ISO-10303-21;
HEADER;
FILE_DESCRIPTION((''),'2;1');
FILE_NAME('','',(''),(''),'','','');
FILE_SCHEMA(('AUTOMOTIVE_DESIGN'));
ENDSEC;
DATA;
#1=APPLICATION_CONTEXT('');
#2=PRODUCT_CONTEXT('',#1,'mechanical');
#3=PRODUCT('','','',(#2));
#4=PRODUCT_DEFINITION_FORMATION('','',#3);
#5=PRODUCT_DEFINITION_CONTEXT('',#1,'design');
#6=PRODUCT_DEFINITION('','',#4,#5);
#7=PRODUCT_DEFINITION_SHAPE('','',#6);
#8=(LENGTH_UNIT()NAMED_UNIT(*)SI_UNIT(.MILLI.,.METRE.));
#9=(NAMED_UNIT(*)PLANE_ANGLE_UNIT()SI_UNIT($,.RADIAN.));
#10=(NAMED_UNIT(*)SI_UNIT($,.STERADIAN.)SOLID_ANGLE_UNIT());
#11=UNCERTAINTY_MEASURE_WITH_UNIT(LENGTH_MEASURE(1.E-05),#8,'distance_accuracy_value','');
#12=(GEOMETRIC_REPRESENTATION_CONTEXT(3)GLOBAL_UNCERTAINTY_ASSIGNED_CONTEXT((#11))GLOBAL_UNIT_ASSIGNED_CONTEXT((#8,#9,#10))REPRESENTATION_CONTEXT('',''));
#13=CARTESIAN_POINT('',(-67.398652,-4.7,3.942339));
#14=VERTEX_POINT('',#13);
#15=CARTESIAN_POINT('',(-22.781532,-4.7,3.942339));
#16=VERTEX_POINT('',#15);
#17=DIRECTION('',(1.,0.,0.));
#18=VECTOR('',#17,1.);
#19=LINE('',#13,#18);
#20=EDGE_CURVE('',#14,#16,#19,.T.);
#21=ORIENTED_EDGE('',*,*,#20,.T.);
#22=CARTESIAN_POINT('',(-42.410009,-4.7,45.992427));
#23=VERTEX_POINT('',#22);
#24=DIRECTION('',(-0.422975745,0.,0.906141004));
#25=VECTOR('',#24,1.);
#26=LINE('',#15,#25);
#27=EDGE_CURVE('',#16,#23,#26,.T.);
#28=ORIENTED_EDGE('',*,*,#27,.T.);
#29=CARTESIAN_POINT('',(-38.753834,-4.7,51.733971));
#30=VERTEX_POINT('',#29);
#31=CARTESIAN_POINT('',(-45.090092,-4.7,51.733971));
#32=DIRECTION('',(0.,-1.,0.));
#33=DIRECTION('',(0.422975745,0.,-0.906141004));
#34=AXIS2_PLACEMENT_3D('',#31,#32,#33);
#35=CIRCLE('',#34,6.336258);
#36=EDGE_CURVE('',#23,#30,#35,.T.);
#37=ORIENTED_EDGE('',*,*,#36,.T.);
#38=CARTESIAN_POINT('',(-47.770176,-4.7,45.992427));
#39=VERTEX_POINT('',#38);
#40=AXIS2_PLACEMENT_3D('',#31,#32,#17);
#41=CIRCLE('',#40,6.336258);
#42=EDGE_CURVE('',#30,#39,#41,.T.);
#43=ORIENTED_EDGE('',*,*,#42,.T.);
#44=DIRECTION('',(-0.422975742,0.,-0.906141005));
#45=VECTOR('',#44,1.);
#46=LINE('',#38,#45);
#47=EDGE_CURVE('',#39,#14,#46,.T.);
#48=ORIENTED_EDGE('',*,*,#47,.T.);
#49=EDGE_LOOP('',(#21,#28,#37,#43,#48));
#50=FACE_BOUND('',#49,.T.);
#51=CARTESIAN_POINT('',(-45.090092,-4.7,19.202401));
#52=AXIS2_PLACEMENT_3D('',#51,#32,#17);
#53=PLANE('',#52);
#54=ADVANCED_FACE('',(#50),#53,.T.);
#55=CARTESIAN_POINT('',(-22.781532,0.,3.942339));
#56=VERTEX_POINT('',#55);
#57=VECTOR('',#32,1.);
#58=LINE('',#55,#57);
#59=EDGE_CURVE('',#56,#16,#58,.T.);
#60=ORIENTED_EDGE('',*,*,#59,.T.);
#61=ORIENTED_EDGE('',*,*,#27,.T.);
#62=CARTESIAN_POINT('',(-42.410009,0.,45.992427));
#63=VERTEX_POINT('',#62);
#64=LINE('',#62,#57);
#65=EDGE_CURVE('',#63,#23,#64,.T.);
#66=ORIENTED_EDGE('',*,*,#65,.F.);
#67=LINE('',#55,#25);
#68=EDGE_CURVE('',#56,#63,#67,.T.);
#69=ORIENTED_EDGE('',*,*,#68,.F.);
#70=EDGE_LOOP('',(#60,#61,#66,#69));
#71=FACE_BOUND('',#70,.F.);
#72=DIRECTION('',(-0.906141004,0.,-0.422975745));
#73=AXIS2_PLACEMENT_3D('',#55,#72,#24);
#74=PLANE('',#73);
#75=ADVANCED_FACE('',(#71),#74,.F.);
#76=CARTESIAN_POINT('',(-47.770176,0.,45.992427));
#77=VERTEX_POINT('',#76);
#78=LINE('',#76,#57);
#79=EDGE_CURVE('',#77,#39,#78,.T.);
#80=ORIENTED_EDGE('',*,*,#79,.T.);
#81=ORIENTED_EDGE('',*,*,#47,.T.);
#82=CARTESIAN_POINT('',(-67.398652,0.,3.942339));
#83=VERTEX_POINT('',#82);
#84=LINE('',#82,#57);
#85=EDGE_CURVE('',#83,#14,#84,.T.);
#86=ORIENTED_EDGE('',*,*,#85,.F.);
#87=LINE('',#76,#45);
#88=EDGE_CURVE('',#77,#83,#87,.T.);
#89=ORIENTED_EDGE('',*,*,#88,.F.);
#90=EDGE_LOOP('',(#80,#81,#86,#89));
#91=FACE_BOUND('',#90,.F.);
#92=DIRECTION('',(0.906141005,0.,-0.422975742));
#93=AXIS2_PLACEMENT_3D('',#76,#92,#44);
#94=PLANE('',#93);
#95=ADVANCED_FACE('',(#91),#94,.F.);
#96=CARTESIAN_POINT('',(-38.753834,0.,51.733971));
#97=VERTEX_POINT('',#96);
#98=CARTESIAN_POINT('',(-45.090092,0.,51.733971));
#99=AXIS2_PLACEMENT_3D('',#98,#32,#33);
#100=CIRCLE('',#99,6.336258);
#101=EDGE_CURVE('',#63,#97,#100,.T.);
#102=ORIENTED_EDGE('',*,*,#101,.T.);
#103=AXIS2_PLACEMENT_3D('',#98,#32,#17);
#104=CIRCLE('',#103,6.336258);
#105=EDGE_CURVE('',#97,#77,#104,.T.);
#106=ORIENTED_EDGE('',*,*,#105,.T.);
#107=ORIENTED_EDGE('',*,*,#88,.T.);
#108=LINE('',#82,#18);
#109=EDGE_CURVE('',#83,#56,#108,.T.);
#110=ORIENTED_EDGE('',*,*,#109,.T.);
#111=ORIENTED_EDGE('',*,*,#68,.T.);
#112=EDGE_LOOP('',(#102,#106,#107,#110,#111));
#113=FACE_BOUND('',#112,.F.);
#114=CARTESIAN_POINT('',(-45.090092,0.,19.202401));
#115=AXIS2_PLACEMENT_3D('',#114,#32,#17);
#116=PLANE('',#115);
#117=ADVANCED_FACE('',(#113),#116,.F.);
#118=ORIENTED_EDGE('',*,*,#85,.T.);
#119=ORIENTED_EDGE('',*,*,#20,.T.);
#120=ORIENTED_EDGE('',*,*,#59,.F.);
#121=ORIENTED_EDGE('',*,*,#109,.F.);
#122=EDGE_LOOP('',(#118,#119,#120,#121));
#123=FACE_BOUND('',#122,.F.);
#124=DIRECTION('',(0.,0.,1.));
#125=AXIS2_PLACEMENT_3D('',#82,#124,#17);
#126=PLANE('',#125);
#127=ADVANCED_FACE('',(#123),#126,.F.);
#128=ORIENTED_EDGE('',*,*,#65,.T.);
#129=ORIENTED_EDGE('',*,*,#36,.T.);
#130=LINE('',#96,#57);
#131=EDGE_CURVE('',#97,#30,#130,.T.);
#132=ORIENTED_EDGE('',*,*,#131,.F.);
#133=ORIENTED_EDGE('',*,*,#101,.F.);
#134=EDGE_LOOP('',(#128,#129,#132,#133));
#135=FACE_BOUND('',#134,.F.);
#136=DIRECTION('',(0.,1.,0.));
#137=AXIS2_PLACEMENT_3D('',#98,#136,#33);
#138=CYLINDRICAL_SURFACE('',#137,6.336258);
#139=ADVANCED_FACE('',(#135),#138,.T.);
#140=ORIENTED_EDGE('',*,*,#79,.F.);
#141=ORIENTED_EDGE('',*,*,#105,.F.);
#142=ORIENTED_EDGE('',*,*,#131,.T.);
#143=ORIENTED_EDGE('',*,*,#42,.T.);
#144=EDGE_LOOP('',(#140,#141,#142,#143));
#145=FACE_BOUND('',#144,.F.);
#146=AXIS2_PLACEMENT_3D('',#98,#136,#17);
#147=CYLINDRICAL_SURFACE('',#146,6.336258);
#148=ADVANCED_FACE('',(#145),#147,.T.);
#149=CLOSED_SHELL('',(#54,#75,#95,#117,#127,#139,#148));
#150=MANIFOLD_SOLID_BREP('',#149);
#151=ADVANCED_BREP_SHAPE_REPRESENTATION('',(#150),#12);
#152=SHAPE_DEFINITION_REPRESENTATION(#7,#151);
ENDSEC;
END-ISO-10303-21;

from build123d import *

# Parameters (mm, degrees)
F1_DEPTH = 4.7


with BuildPart() as f1:
    # F0 (on Front) → F1 (new body)
    with BuildSketch(Plane.XZ):
        with BuildLine():
            Line((-47.77017605, 45.9924270552), (-67.3986524343, 3.9423387498))
            Line((-67.3986524343, 3.9423387498), (-22.7815322578, 3.9423387498))
            Line((-22.7815322578, 3.9423387498), (-42.4100088013, 45.9924270633))
            ThreePointArc((-42.4100088013, 45.9924270633), (-45.0900924247, 45.3977122077), (-47.77017605, 45.9924270552))
        make_face()
        with BuildLine():
            ThreePointArc((-38.753834, 51.7339706421), (-48.4935075231, 57.0785881851), (-47.77017605, 45.9924270552))
            Line((-47.77017605, 45.9924270552), (-45.0900924343, 51.7339706421))
            Line((-45.0900924343, 51.7339706421), (-42.4100088013, 45.9924270633))
            ThreePointArc((-42.4100088013, 45.9924270633), (-39.7454748862, 48.3305555615), (-38.753834, 51.7339706421))
        make_face()
        with BuildLine():
            Line((-45.0900924343, 51.7339706421), (-47.77017605, 45.9924270552))
            ThreePointArc((-47.77017605, 45.9924270552), (-45.0900924247, 45.3977122077), (-42.4100088013, 45.9924270633))
            Line((-42.4100088013, 45.9924270633), (-45.0900924343, 51.7339706421))
        make_face()
    extrude(amount=F1_DEPTH)


solid = f1.part
